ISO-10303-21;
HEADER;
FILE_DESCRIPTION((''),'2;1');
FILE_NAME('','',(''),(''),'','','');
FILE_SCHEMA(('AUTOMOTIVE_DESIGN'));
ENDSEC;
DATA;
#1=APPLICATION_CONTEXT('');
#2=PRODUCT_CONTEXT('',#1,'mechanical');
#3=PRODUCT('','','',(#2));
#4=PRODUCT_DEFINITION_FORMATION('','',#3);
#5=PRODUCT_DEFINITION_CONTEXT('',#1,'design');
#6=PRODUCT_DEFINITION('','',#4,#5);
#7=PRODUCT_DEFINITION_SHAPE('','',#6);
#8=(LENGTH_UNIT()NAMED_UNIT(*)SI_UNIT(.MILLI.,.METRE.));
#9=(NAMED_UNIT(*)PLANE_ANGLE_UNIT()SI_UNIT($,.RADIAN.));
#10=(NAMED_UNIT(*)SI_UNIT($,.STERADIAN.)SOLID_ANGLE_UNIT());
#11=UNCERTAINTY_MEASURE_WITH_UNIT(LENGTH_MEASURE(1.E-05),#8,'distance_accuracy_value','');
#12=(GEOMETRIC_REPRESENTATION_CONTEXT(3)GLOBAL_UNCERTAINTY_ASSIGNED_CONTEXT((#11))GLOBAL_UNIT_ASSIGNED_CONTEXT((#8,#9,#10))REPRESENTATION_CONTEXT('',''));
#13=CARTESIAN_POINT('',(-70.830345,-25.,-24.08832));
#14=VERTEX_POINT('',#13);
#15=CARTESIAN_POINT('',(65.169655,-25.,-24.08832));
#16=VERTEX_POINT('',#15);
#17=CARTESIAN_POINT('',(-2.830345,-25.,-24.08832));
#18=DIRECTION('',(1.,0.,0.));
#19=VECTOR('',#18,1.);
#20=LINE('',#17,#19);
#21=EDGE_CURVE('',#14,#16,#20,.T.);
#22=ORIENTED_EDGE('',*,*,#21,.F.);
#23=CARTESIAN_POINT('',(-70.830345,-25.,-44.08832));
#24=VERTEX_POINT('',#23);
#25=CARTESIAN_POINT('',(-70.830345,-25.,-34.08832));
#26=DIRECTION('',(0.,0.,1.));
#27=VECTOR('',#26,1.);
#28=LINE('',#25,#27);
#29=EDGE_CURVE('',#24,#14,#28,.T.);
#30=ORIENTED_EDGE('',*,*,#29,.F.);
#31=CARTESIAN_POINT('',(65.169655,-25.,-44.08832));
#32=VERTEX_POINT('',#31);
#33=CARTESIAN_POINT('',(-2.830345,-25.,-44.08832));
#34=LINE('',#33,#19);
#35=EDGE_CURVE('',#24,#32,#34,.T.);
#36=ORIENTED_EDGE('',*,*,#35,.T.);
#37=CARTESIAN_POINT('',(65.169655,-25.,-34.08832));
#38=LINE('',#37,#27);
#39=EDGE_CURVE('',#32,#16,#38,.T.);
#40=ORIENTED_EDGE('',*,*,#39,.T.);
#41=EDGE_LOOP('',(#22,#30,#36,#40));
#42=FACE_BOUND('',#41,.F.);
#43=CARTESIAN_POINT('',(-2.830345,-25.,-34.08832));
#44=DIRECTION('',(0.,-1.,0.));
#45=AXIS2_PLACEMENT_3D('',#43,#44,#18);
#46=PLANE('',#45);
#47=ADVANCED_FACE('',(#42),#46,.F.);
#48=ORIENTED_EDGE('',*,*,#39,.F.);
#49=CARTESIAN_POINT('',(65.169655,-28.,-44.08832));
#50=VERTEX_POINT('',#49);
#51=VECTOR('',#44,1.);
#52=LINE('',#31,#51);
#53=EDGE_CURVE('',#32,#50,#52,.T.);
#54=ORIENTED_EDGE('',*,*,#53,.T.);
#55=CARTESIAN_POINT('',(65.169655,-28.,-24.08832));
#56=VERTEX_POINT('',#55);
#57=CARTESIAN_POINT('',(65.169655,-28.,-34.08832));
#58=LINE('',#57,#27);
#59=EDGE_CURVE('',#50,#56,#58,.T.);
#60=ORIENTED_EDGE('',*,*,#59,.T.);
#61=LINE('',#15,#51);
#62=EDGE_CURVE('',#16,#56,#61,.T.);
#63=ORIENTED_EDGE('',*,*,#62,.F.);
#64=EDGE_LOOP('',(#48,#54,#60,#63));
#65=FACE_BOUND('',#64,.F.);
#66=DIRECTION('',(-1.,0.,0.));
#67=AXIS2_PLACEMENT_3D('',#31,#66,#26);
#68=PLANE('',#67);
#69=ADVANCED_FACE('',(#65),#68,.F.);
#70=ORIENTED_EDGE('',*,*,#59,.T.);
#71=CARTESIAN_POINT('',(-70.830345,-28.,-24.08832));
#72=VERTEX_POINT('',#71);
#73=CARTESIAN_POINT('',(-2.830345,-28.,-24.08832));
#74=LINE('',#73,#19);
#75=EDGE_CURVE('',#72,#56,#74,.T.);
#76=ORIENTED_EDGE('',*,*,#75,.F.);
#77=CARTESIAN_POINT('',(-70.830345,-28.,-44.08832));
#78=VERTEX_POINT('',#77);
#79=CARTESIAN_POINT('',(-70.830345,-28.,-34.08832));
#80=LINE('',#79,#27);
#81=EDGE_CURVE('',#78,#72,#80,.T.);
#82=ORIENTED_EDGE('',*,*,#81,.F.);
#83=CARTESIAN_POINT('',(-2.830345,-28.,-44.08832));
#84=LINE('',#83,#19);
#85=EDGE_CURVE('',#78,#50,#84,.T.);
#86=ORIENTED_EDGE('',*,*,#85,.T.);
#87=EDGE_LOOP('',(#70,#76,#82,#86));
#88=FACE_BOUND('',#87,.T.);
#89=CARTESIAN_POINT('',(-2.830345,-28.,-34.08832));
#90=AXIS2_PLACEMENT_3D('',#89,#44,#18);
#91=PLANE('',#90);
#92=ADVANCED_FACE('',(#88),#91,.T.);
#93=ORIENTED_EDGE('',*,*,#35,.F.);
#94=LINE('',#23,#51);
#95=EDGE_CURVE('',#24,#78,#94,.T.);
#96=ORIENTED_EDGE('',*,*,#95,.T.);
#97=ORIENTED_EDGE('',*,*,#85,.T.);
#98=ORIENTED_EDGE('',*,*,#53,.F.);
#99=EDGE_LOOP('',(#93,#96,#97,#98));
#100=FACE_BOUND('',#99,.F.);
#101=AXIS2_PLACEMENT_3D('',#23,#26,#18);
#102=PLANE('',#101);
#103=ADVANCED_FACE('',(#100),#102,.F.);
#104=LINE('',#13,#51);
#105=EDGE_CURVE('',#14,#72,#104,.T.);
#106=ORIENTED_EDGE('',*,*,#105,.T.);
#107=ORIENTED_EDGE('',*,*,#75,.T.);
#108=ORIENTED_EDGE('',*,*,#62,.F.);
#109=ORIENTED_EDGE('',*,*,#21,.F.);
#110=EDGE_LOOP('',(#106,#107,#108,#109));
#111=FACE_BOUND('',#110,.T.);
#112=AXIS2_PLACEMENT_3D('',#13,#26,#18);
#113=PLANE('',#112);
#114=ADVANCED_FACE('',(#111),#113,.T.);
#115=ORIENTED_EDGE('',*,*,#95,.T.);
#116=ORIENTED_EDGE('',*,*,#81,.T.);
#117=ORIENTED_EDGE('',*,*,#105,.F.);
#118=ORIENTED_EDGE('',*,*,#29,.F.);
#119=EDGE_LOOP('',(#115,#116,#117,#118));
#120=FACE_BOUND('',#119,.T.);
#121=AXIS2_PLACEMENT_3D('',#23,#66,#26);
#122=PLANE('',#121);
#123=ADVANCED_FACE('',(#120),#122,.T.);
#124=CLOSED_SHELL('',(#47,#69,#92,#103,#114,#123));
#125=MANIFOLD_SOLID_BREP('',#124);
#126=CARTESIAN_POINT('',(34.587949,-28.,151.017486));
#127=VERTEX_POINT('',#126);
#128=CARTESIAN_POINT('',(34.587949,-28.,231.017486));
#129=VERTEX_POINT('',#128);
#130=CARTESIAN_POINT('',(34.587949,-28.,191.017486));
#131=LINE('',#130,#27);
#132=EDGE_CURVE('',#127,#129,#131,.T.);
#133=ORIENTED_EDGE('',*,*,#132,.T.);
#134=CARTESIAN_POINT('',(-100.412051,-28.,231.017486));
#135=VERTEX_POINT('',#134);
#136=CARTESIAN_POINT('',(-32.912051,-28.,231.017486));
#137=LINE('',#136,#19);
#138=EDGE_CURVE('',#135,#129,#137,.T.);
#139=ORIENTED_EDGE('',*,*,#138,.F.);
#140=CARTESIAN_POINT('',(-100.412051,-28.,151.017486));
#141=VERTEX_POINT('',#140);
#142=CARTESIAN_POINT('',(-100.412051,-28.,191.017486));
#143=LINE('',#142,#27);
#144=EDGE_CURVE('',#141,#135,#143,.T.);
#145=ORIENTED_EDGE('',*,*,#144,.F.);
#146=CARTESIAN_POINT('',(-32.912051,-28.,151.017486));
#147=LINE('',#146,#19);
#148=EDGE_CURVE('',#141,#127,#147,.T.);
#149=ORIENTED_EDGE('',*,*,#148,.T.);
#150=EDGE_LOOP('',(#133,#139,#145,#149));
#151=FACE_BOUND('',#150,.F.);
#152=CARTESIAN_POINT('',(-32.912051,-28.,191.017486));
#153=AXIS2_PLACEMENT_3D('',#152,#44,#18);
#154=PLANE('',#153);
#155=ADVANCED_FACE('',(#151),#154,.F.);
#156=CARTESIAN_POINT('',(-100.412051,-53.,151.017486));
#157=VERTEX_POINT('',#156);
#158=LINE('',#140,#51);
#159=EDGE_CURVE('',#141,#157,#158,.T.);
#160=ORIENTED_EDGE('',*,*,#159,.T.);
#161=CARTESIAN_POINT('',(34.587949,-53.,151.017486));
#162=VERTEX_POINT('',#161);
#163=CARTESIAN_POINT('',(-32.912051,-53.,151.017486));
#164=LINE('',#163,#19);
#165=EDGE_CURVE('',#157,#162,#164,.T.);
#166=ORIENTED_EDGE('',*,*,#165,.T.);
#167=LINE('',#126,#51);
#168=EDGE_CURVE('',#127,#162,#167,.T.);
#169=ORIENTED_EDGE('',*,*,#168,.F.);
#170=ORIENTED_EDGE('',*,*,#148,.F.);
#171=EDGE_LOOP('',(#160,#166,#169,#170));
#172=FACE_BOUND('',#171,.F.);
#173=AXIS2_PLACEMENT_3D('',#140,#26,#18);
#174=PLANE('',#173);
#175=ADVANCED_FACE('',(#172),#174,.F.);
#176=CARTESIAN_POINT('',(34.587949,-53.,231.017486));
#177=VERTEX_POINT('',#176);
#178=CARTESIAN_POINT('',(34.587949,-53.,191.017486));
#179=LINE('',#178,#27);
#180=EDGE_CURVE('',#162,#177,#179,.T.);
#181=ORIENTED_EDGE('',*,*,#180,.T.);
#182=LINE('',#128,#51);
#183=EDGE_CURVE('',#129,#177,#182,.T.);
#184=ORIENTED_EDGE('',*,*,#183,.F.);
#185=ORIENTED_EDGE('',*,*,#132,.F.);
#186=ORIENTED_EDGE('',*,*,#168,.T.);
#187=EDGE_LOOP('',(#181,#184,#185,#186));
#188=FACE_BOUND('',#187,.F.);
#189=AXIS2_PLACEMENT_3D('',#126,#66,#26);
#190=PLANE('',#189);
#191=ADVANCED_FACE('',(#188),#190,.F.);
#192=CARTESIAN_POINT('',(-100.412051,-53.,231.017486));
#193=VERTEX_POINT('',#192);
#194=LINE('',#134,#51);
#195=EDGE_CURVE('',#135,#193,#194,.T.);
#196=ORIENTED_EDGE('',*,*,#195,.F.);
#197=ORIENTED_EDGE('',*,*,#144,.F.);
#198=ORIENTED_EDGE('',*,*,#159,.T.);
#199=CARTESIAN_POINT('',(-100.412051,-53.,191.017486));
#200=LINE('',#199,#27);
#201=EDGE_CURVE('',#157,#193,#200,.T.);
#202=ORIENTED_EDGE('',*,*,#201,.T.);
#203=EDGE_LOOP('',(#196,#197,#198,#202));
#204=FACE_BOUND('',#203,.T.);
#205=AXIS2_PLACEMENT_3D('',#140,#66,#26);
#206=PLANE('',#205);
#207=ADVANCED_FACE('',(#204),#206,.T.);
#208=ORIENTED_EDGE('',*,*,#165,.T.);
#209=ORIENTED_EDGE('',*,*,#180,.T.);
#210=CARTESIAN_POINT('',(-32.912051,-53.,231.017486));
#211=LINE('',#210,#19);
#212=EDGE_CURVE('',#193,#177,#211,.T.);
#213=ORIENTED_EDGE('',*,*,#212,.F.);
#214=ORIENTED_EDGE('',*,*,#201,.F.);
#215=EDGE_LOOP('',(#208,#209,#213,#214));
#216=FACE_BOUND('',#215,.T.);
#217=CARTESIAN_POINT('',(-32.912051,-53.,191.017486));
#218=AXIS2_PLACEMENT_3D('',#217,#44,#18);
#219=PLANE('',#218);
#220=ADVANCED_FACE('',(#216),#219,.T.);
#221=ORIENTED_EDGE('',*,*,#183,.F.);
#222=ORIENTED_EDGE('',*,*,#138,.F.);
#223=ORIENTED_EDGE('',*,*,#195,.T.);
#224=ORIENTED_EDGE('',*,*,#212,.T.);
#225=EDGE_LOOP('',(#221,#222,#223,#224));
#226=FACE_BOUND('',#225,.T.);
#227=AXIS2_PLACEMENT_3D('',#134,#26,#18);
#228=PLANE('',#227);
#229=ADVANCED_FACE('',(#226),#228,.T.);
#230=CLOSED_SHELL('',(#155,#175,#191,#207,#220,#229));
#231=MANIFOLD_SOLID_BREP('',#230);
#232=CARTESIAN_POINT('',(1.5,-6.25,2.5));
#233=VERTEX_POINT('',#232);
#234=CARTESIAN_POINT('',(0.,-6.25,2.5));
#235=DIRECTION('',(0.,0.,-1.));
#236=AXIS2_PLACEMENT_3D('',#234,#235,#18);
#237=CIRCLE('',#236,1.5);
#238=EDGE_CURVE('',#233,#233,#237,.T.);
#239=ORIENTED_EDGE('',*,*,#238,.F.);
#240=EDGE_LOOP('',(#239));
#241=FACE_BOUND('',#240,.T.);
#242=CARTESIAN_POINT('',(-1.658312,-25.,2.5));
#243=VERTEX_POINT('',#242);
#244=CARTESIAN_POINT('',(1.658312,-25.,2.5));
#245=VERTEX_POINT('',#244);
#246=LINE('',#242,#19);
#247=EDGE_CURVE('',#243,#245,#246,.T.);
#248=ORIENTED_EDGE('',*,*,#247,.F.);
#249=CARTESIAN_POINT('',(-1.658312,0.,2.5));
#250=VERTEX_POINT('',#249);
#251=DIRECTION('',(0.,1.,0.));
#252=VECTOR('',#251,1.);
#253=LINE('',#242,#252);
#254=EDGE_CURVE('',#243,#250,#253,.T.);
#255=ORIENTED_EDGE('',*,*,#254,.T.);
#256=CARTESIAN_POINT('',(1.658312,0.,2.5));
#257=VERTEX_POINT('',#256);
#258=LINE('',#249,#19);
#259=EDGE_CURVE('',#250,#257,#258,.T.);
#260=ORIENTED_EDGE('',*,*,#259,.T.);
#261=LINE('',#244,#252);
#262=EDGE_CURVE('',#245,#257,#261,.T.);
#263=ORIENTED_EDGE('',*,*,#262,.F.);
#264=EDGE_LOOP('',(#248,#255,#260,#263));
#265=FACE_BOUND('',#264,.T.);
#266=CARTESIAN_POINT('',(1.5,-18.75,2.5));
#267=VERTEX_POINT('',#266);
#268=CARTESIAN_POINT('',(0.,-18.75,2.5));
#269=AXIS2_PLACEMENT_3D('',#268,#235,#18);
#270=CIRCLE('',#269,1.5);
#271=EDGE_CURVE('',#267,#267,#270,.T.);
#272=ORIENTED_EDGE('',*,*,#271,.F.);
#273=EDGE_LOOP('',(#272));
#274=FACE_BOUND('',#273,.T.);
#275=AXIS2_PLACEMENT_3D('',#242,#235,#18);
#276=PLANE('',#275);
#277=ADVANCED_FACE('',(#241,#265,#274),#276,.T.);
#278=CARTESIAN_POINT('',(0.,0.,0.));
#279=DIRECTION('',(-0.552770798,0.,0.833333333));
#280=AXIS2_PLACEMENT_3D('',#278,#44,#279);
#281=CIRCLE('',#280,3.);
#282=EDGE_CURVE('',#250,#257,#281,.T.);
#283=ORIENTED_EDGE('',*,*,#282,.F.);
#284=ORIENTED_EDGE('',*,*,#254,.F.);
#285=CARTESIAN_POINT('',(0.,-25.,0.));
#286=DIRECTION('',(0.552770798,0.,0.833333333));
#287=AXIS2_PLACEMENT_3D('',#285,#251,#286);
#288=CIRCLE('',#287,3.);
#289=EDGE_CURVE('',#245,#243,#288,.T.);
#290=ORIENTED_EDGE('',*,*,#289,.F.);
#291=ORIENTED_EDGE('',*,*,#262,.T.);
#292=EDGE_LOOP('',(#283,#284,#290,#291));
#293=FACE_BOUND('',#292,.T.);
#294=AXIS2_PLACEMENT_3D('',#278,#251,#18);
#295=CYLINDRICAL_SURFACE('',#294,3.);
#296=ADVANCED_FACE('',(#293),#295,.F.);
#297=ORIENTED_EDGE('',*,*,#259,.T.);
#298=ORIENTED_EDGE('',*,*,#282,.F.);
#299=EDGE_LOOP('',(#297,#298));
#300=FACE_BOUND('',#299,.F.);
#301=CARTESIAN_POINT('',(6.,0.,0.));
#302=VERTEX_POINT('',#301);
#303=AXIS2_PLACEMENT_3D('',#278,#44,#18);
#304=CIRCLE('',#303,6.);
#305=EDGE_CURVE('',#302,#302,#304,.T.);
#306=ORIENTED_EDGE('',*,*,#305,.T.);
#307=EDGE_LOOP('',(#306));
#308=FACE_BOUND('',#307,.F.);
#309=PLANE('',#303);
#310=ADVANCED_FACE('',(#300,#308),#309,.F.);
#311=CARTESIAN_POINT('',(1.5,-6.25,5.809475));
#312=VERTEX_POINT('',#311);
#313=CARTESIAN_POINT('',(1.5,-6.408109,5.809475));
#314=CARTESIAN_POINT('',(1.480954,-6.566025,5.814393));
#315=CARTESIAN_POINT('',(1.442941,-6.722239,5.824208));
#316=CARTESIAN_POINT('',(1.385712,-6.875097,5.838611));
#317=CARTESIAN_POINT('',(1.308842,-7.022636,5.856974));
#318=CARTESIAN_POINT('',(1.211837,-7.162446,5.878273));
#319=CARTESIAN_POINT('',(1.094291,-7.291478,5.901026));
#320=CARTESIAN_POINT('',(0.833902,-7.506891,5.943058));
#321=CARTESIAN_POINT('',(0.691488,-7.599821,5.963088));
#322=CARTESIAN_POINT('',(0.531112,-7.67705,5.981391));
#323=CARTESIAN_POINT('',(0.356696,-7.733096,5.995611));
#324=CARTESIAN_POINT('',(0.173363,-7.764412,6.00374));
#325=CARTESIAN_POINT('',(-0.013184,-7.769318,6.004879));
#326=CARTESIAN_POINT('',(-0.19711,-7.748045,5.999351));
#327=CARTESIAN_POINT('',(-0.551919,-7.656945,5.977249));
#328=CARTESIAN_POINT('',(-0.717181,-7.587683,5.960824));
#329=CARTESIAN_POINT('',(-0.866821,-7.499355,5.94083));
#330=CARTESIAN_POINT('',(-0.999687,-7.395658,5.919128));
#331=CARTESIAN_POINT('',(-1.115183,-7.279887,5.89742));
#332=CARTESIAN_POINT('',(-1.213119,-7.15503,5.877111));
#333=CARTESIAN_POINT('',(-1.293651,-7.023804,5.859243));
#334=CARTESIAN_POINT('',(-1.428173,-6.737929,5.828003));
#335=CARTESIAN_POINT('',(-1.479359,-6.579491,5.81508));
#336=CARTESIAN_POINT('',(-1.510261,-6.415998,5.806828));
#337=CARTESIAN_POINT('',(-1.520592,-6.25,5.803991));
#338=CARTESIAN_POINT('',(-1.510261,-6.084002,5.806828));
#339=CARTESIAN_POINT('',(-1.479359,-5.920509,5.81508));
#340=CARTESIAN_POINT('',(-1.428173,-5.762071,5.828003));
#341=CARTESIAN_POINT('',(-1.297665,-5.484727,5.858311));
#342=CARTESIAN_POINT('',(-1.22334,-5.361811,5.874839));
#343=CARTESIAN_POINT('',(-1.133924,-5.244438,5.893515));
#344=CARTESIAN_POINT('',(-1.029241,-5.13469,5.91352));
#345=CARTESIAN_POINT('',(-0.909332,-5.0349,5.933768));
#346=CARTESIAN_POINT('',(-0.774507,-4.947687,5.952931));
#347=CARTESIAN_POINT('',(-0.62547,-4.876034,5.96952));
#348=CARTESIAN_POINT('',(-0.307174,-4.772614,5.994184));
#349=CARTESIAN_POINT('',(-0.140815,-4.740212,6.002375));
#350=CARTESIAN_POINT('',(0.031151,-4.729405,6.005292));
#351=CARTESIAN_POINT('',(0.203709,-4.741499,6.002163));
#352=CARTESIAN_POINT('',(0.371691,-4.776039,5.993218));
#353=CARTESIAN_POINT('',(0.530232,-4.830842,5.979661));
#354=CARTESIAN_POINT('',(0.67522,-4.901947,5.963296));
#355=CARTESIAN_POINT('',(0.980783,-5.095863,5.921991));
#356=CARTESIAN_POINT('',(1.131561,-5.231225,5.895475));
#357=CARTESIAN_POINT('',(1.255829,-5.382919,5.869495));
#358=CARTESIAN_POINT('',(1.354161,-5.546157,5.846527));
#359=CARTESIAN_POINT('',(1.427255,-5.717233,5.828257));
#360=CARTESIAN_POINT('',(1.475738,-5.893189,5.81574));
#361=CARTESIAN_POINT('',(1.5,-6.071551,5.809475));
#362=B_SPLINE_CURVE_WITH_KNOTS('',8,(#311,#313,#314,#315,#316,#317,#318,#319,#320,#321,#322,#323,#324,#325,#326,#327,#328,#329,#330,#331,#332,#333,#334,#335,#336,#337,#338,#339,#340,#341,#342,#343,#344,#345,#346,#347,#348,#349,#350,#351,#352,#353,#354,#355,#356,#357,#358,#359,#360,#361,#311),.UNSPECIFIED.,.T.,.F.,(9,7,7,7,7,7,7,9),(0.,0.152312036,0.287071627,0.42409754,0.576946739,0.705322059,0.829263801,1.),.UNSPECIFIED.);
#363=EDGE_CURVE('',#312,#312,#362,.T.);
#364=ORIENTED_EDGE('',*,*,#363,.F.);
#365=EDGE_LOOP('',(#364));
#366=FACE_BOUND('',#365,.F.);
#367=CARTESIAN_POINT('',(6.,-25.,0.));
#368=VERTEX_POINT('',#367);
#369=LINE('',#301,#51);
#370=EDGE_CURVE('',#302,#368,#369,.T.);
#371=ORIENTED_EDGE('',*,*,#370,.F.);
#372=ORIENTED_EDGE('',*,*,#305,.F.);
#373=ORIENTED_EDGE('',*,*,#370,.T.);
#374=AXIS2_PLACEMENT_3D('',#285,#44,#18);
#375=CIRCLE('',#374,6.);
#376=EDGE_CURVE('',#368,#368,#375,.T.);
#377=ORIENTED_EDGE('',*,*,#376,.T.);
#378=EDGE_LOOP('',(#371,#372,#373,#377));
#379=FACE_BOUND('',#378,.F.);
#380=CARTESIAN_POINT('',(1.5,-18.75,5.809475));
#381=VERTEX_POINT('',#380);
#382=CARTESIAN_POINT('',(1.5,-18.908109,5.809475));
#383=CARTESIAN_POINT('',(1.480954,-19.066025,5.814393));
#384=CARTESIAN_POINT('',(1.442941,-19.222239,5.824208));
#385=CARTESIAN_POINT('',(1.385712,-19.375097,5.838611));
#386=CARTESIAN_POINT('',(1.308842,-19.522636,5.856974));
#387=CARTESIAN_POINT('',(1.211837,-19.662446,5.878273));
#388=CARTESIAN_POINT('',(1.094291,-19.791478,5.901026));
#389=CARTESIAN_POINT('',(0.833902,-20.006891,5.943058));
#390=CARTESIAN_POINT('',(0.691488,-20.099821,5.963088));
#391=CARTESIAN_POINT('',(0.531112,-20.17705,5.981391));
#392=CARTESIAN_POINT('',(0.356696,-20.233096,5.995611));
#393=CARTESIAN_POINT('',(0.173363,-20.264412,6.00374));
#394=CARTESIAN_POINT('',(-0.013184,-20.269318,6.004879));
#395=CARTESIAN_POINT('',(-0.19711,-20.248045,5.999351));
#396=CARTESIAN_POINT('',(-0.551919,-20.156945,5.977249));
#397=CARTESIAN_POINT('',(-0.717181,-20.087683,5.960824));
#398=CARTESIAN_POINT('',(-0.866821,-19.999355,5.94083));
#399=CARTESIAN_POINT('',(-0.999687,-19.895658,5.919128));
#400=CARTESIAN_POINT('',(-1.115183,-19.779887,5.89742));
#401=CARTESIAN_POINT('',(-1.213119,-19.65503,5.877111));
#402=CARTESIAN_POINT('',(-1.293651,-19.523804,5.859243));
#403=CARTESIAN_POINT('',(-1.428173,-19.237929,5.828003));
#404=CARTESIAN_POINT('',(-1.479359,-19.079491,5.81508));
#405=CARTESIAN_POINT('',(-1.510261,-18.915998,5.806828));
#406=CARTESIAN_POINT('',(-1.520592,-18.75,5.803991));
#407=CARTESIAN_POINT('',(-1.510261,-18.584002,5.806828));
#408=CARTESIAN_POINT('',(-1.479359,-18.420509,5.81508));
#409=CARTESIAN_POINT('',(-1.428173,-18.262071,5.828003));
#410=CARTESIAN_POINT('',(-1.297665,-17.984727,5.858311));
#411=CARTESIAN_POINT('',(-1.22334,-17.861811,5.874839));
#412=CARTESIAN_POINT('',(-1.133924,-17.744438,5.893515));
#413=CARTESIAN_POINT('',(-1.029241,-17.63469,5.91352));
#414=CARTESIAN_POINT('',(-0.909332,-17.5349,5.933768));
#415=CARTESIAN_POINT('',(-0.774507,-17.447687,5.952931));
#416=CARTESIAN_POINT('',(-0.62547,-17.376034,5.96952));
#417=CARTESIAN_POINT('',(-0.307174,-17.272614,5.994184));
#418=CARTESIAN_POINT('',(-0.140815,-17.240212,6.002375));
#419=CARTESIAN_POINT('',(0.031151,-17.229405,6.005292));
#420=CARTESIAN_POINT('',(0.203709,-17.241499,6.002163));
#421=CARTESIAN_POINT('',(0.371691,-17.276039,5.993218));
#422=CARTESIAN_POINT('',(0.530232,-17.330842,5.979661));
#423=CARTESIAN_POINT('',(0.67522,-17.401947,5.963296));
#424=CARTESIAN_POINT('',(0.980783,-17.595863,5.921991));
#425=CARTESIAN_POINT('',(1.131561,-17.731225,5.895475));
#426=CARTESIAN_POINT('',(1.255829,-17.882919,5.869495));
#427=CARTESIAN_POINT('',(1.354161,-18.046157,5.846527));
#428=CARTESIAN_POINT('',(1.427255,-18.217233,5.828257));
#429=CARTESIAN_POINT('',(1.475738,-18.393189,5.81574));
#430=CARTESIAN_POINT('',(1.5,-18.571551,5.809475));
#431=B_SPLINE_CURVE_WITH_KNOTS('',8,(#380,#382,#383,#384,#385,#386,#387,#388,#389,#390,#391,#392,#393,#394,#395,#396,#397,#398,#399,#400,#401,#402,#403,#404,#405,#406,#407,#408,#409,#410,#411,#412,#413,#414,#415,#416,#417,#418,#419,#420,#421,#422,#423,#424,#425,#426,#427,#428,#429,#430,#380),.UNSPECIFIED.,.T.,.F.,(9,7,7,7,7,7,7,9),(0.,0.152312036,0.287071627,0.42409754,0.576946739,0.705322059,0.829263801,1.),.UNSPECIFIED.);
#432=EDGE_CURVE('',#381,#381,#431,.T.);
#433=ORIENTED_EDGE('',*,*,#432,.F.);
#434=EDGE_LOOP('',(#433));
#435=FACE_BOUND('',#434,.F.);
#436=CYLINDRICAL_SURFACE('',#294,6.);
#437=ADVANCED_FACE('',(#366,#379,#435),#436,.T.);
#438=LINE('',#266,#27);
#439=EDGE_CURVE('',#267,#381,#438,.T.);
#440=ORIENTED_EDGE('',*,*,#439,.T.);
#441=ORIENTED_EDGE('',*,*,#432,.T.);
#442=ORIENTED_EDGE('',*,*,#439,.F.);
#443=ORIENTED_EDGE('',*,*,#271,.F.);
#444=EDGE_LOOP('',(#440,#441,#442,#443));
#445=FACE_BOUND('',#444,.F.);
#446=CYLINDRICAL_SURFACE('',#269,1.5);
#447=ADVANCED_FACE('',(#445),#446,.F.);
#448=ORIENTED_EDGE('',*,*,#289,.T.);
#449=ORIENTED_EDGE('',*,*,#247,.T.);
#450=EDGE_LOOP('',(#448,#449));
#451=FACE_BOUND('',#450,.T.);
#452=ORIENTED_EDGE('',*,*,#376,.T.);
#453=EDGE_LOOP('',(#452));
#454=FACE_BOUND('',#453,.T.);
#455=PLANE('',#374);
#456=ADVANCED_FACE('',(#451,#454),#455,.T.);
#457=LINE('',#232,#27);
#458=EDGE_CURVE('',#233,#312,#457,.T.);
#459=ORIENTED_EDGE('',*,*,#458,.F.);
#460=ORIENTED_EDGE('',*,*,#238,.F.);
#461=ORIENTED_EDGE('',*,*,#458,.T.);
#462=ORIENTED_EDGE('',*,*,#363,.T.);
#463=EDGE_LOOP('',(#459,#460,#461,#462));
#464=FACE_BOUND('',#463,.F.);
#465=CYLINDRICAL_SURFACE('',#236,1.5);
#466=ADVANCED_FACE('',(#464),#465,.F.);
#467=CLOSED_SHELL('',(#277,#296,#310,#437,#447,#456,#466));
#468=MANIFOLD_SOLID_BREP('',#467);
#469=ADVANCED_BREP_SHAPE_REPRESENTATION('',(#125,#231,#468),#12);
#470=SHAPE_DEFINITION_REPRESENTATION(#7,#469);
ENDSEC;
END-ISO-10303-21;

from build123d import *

# Parameters (mm, degrees)
F0_R      = 6
F1_DEPTH  = 25
F2_R      = 3
F3_DEPTH  = 25
F5_DEPTH  = 25
F6_R      = 1.5
F7_DEPTH  = 3.5
F8_W      = 136
F8_H      = 20
F9_DEPTH  = 3
F11_W     = 135
F11_H     = 80
F12_DEPTH = 25


with BuildPart() as f1:
    # F0 (on Front) → F1 (new body)
    with BuildSketch(Plane.XZ):
        Circle(F0_R)
    extrude(amount=F1_DEPTH)

    # F2 (on Front) → F3 (cut, through all)
    with BuildSketch(Plane.XZ):
        Circle(F2_R)
    extrude(amount=F3_DEPTH, mode=Mode.SUBTRACT)

    # F4 (on face) → F5 (join, through all)
    with BuildSketch(Plane.XZ.offset(25)):
        with BuildLine():
            Line((-1.6583123952, 2.5), (0, 2.5))
            Line((0, 2.5), (1.6583123952, 2.5))
            ThreePointArc((1.6583123952, 2.5), (0, 3), (-1.6583123952, 2.5))
        make_face()
    extrude(amount=-F5_DEPTH)

    # F6 (on face) → F7 (cut, through all)
    with BuildSketch(Plane(origin=(0, 0, 2.5), x_dir=(1, 0, 0), z_dir=(0, 0, -1))):
        with Locations((0, 18.75)):
            Circle(F6_R)
        with Locations((0, 6.25)):
            Circle(F6_R)
    extrude(amount=-F7_DEPTH, mode=Mode.SUBTRACT)


with BuildPart() as f9:
    # F8 (on face) → F9 (new body)
    with BuildSketch(Plane.XZ.offset(25)):
        with Locations((-2.8303451836, -34.0883203877)):
            Rectangle(F8_W, F8_H)
    extrude(amount=F9_DEPTH)


with BuildPart() as f12:
    # F11 (on face) → F12 (new body)
    with BuildSketch(Plane.XZ.offset(28)):
        with Locations((-32.9120505211, 191.017486155)):
            Rectangle(F11_W, F11_H)
    extrude(amount=F12_DEPTH)


solid = Compound([f1.part, f9.part, f12.part])
